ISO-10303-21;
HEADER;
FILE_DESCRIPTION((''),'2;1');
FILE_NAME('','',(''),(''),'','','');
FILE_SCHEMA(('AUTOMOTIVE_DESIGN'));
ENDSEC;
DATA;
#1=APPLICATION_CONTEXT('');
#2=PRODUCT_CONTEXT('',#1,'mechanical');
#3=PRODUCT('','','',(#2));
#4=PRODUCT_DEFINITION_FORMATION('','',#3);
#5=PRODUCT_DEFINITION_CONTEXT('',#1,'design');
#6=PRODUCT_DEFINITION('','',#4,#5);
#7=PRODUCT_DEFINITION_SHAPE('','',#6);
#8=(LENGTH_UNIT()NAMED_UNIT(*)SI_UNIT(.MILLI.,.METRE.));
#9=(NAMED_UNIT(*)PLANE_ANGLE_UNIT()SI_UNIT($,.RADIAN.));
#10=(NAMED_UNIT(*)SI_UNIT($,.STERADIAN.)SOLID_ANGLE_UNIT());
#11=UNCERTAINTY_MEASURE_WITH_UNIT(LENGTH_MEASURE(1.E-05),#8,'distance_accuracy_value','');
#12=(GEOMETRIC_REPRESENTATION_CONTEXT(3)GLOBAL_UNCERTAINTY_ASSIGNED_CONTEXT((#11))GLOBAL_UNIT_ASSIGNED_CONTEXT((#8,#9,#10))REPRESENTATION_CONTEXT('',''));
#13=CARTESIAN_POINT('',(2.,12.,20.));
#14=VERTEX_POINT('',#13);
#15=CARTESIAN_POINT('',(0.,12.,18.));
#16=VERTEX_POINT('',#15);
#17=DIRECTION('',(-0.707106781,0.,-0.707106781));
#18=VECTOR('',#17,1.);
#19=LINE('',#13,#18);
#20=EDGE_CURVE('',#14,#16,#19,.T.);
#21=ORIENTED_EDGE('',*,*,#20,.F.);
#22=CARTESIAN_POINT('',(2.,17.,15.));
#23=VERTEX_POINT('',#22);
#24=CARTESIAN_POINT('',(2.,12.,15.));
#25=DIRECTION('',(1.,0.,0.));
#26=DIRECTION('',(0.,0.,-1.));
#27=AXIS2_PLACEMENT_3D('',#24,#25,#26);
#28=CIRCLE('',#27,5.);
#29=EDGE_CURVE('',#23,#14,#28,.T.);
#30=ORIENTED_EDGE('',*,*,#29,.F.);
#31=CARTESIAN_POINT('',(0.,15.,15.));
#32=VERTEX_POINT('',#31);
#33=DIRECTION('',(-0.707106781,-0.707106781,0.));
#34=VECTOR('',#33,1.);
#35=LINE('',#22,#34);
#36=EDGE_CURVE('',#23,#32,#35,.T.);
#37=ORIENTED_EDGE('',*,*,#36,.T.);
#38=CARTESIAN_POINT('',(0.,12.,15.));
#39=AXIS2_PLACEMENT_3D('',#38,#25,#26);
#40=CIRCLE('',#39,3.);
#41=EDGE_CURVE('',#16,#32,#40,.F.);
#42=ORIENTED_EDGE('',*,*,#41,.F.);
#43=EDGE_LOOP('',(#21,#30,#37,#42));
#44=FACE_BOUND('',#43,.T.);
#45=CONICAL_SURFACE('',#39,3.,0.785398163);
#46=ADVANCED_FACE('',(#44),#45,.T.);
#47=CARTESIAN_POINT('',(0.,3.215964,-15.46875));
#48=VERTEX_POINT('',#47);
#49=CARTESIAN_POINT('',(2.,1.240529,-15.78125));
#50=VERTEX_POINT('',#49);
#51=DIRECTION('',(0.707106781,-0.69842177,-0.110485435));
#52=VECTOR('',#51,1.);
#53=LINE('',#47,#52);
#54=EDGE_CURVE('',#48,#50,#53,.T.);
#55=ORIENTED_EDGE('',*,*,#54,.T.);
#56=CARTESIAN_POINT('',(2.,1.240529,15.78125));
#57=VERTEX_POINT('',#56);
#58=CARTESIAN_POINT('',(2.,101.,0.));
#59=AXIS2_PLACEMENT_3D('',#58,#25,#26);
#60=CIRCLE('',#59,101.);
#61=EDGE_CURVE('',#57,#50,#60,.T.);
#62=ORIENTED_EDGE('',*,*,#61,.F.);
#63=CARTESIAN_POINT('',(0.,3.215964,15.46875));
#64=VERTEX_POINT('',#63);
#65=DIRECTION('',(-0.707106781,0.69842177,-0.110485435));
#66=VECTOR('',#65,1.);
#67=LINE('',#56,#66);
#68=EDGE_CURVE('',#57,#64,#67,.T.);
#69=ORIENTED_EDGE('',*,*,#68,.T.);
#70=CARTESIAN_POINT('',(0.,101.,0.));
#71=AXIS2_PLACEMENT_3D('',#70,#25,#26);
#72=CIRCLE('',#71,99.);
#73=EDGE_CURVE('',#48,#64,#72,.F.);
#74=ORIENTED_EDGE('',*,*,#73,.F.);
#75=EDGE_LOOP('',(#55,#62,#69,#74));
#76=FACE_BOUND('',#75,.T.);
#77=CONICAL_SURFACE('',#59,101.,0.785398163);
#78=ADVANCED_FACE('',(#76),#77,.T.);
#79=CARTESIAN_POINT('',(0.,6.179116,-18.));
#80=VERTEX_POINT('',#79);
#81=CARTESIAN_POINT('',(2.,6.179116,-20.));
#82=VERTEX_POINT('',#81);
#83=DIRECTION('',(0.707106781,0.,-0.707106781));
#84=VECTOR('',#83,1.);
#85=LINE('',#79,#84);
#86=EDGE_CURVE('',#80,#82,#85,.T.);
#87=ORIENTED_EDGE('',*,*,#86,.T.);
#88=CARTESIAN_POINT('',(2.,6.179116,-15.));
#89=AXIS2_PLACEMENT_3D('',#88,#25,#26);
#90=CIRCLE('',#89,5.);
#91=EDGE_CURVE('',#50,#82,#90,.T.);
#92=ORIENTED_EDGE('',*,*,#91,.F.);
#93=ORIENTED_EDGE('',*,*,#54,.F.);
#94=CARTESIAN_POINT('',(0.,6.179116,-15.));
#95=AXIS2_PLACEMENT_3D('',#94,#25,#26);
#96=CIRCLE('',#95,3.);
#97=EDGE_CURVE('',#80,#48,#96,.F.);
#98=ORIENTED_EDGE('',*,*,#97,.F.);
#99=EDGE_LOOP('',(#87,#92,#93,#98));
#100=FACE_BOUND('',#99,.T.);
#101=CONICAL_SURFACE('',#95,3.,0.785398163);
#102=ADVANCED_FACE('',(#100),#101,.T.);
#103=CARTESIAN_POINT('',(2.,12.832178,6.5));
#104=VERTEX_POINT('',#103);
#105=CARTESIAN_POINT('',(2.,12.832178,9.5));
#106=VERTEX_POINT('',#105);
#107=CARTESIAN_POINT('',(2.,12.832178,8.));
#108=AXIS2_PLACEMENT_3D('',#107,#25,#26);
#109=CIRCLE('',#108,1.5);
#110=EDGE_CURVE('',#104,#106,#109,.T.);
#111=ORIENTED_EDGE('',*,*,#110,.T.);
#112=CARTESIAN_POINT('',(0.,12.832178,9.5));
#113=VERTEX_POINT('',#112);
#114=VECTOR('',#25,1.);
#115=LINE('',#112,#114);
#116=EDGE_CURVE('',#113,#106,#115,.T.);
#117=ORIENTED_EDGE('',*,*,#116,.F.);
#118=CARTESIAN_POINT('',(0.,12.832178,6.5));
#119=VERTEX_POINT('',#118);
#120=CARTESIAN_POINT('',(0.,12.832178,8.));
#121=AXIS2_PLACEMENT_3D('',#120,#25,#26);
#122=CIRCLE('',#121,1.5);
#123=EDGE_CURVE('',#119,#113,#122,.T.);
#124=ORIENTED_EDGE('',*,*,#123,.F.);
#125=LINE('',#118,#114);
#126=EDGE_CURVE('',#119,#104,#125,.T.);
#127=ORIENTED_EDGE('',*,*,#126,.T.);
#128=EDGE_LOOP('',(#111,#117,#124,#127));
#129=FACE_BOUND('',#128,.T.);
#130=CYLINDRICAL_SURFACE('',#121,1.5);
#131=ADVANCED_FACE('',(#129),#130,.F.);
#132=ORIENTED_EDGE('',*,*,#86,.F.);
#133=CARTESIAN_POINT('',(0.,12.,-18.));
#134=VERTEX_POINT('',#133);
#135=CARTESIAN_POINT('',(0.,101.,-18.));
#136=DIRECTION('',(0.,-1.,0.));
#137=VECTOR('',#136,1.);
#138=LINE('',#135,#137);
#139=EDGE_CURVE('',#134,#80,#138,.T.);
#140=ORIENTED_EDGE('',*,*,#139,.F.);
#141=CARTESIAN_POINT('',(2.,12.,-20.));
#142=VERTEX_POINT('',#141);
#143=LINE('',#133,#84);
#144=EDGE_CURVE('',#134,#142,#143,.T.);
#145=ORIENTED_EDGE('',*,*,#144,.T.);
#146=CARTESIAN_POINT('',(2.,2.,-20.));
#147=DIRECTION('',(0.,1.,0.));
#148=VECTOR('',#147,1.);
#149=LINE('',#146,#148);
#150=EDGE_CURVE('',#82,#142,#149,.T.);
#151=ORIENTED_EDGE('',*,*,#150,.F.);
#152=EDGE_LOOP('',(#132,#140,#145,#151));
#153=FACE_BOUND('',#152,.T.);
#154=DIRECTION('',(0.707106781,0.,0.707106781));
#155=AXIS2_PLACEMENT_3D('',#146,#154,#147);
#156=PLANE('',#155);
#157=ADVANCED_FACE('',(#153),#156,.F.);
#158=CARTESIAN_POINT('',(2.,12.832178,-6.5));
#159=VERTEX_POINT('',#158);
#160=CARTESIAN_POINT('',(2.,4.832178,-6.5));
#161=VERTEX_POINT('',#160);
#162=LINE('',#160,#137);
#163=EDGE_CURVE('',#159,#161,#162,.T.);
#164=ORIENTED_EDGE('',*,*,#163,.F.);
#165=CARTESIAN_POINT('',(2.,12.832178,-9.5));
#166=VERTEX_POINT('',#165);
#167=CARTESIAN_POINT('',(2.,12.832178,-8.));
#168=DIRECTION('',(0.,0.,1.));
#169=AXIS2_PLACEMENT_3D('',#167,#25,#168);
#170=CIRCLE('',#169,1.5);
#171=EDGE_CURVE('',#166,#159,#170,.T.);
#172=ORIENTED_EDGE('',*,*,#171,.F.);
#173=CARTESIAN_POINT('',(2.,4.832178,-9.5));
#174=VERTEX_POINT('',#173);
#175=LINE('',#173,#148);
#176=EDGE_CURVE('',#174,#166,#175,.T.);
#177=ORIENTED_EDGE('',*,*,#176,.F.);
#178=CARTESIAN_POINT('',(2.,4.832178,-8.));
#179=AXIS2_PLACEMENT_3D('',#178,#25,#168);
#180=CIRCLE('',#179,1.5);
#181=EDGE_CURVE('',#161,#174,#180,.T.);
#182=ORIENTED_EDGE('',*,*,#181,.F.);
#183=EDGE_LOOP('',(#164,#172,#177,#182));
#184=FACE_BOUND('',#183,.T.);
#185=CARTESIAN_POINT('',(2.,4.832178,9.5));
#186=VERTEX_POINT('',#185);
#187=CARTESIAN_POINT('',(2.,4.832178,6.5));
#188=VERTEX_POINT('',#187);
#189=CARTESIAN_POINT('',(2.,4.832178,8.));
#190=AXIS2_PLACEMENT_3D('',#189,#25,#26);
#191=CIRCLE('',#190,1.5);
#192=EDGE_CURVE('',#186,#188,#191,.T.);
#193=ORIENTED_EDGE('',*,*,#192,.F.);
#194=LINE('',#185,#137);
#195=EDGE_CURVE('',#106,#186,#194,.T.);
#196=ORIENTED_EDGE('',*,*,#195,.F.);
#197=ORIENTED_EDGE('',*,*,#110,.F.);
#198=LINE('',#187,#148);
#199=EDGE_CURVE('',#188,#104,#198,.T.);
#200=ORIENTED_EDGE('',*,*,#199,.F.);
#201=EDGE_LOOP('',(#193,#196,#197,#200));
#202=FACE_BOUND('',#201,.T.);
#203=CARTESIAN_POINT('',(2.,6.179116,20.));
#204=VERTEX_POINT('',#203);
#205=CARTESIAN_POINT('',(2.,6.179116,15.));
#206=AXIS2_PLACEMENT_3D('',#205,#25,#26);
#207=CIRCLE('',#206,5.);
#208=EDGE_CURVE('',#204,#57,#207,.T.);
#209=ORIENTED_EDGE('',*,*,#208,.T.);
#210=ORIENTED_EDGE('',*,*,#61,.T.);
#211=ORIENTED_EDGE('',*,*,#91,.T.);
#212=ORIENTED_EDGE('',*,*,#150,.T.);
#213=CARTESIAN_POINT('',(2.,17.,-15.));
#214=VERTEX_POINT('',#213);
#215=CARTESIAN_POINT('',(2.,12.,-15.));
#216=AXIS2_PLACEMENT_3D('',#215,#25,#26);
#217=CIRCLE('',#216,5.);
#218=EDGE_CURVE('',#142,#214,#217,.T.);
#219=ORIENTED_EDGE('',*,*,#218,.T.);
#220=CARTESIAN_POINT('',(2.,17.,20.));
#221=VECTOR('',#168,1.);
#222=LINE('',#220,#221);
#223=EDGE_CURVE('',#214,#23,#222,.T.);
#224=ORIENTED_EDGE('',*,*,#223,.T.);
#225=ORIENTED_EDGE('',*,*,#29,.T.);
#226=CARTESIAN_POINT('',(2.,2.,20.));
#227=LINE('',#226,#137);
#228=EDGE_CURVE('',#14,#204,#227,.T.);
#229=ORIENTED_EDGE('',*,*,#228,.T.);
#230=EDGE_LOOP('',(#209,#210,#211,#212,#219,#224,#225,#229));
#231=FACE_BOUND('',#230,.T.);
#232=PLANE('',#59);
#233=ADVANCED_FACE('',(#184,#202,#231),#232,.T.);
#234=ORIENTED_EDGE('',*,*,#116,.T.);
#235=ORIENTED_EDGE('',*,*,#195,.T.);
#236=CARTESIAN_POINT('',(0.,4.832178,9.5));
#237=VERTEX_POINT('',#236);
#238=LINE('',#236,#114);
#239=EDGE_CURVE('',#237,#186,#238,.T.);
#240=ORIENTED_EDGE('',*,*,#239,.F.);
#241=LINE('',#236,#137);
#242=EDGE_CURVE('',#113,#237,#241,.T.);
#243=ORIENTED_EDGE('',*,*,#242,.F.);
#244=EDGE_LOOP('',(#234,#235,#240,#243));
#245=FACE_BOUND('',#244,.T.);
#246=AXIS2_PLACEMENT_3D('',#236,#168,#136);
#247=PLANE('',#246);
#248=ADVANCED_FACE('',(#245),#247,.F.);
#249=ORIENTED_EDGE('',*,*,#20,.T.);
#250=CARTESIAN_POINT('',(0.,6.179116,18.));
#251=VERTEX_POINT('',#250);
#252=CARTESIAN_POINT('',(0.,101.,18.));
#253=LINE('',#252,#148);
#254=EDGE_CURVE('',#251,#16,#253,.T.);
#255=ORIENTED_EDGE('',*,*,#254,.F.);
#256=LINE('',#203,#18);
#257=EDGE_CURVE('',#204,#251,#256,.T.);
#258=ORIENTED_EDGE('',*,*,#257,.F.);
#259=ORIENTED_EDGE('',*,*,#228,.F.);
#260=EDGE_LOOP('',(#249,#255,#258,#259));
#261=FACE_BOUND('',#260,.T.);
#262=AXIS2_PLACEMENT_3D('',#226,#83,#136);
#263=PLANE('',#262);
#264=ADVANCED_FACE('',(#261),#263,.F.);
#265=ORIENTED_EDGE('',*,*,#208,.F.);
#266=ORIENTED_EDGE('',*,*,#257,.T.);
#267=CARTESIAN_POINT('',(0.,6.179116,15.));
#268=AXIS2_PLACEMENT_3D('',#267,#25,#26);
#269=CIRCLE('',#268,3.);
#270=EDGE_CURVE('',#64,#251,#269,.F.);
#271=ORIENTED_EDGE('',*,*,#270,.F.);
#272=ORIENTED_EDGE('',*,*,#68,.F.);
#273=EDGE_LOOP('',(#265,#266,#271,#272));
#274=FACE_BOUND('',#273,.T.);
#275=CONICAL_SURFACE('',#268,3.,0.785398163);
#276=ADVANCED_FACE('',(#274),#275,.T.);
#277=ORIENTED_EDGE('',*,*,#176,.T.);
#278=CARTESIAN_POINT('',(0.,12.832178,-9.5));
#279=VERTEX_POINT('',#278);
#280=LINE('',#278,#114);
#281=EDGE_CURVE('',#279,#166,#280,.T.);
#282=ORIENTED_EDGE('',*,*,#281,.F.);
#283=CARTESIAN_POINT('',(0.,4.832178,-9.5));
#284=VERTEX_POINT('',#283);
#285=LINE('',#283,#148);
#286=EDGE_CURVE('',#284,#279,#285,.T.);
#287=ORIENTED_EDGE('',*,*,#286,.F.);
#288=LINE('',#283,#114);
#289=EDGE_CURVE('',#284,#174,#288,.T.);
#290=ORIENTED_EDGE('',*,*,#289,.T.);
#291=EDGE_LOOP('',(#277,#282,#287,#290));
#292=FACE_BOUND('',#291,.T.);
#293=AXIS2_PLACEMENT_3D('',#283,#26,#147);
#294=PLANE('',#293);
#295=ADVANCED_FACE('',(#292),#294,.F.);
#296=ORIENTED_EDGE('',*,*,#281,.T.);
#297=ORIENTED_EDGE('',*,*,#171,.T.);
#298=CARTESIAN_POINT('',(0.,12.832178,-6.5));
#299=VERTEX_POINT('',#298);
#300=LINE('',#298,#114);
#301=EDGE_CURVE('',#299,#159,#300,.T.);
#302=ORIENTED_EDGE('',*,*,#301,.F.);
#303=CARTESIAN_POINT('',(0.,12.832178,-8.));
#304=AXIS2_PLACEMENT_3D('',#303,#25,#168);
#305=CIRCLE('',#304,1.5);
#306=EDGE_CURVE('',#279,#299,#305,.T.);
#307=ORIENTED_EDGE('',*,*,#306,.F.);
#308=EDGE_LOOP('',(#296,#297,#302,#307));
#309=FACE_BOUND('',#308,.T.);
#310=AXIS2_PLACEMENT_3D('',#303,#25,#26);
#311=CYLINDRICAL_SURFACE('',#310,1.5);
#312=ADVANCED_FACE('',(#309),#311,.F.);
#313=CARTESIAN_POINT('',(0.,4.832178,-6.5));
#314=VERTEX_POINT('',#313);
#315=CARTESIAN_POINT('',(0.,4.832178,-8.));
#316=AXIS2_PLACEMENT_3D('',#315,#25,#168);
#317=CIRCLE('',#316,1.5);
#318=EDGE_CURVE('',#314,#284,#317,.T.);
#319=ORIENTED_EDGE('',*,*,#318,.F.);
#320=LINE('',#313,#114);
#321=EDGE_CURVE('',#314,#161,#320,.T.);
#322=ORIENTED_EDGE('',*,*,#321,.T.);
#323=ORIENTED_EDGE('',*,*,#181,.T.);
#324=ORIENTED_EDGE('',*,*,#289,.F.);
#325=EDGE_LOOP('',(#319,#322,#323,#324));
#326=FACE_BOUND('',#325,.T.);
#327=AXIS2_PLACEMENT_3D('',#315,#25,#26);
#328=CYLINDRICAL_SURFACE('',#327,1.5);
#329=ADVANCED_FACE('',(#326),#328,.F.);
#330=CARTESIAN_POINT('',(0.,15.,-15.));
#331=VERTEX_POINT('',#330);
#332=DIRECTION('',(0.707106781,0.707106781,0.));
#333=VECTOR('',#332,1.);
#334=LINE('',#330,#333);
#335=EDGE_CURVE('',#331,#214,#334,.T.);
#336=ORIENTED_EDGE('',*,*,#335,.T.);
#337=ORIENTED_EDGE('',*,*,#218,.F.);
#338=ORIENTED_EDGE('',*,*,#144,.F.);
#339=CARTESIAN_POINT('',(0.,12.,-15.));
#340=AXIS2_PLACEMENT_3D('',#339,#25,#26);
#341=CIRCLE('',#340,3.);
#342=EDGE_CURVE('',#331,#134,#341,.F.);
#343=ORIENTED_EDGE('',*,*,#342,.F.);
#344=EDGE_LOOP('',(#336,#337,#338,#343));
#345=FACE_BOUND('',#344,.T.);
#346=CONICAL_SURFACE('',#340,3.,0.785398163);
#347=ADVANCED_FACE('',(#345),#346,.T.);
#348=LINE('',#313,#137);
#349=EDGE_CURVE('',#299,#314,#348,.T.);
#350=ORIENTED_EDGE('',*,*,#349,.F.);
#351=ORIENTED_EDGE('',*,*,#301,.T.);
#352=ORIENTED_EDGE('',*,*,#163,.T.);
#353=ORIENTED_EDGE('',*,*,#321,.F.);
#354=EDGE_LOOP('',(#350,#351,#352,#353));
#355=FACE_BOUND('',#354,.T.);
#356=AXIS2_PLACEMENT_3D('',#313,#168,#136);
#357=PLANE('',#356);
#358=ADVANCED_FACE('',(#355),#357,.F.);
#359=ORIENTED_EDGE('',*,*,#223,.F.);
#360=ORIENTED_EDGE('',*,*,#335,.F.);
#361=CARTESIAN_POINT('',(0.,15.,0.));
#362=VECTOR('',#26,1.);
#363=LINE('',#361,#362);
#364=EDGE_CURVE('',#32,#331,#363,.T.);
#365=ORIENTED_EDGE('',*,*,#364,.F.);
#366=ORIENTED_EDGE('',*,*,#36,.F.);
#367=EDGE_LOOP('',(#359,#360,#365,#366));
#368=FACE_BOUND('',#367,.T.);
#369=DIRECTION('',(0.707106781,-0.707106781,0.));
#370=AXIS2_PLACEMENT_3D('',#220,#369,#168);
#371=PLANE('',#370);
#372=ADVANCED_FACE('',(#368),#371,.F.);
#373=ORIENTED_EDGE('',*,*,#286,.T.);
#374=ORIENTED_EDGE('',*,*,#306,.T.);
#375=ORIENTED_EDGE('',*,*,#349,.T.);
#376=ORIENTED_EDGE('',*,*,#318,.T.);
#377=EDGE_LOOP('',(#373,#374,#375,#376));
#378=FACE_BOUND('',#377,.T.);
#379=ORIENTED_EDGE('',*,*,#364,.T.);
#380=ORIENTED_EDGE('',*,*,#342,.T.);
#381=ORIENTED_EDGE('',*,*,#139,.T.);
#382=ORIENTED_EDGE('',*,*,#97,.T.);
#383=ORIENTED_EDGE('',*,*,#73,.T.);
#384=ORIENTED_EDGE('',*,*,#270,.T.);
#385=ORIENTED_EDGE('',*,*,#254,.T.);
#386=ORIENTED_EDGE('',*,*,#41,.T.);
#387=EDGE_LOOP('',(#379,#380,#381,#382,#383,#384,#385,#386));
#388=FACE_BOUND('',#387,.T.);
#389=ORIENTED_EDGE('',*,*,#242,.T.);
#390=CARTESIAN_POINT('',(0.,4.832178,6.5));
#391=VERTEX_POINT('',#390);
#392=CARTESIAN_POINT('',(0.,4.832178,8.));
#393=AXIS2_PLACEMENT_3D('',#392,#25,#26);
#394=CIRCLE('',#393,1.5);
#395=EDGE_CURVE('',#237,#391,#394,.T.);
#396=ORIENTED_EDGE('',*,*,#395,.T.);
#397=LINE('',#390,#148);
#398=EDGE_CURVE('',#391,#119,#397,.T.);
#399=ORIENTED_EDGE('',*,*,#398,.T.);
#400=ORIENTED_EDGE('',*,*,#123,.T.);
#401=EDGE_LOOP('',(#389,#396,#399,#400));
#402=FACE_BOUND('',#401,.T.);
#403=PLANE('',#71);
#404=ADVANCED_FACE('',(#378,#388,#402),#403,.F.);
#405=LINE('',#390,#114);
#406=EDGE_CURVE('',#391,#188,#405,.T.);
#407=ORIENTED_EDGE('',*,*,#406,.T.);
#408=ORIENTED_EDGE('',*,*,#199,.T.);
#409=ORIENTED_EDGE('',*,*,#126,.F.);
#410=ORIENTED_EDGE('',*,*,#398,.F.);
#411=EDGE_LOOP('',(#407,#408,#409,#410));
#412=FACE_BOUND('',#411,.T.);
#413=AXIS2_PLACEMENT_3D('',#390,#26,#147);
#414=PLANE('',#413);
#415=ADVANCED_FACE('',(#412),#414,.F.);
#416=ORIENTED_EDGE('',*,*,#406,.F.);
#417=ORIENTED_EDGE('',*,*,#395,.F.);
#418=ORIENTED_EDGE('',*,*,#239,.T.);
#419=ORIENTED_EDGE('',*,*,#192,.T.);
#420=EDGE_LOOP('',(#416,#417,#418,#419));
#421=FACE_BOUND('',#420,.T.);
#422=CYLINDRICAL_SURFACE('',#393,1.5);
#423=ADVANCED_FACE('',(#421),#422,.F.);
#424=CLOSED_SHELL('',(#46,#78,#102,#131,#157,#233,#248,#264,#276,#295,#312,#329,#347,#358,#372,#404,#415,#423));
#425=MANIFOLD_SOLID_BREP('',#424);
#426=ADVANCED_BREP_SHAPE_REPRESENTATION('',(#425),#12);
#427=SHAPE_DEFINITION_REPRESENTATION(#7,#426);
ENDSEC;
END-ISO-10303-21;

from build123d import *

# Parameters (mm, degrees)
EXTRUDE_1_DEPTH     = 2
CUT_EXTRUDE_1_DEPTH = 2
FILLET_1_R          = 5
CHAMFER_1_SIZE      = 2


with BuildPart() as part:
    # 草图1 → 凸台-拉伸1 (new body)
    with BuildSketch(Plane(origin=(0, 0, 0), x_dir=(0, 0, -1), z_dir=(1, 0, 0))):
        with BuildLine():
            Line((-20, 2), (-20, 17))
            Line((-20, 17), (20, 17))
            Line((20, 17), (20, 2))
            ThreePointArc((20, 2), (0, 0), (-20, 2))
        make_face()
    extrude(amount=EXTRUDE_1_DEPTH)

    # 草图2 → 切除-拉伸1 (cut)
    with BuildSketch(Plane(origin=(2, 0, 0), x_dir=(0, 0, -1), z_dir=(1, 0, 0))):
        with BuildLine():
            Line((-9.5, 4.832177939), (-9.5, 12.832177939))
            ThreePointArc((-9.5, 12.832177939), (-8, 14.332177939), (-6.5, 12.832177939))
            Line((-6.5, 12.832177939), (-6.5, 4.832177939))
            ThreePointArc((-6.5, 4.832177939), (-8, 3.332177939), (-9.5, 4.832177939))
        make_face()
        with BuildLine():
            Line((9.5, 4.832177939), (9.5, 12.832177939))
            ThreePointArc((9.5, 12.832177939), (8, 14.332177939), (6.5, 12.832177939))
            Line((6.5, 12.832177939), (6.5, 4.832177939))
            ThreePointArc((6.5, 4.832177939), (8, 3.332177939), (9.5, 4.832177939))
        make_face()
    extrude(amount=-CUT_EXTRUDE_1_DEPTH, mode=Mode.SUBTRACT)

    # 圆角1
    fillet_1_edges = [part.edges().sort_by_distance(p)[0] for p in [
        (1, 2, -20),
        (1, 2, 20),
        (1, 17, 20),
        (1, 17, -20),
    ]]
    fillet(fillet_1_edges, radius=FILLET_1_R)

    # 倒角1
    chamfer_1_edges = [part.edges().sort_by_distance(p)[0] for p in [
        (0, 0, 0),
        (0, 2.93152096, -18.801726581),
        (0, 2.93152096, 18.801726581),
        (0, 9.089558112, -20),
        (0, 9.089558112, 20),
        (0, 15.535533906, -18.535533906),
        (0, 15.535533906, 18.535533906),
        (0, 17, 0),
    ]]
    chamfer(chamfer_1_edges, length=CHAMFER_1_SIZE - 0.0001)  # a hair under: the kernel refuses the full size


solid = part.part
